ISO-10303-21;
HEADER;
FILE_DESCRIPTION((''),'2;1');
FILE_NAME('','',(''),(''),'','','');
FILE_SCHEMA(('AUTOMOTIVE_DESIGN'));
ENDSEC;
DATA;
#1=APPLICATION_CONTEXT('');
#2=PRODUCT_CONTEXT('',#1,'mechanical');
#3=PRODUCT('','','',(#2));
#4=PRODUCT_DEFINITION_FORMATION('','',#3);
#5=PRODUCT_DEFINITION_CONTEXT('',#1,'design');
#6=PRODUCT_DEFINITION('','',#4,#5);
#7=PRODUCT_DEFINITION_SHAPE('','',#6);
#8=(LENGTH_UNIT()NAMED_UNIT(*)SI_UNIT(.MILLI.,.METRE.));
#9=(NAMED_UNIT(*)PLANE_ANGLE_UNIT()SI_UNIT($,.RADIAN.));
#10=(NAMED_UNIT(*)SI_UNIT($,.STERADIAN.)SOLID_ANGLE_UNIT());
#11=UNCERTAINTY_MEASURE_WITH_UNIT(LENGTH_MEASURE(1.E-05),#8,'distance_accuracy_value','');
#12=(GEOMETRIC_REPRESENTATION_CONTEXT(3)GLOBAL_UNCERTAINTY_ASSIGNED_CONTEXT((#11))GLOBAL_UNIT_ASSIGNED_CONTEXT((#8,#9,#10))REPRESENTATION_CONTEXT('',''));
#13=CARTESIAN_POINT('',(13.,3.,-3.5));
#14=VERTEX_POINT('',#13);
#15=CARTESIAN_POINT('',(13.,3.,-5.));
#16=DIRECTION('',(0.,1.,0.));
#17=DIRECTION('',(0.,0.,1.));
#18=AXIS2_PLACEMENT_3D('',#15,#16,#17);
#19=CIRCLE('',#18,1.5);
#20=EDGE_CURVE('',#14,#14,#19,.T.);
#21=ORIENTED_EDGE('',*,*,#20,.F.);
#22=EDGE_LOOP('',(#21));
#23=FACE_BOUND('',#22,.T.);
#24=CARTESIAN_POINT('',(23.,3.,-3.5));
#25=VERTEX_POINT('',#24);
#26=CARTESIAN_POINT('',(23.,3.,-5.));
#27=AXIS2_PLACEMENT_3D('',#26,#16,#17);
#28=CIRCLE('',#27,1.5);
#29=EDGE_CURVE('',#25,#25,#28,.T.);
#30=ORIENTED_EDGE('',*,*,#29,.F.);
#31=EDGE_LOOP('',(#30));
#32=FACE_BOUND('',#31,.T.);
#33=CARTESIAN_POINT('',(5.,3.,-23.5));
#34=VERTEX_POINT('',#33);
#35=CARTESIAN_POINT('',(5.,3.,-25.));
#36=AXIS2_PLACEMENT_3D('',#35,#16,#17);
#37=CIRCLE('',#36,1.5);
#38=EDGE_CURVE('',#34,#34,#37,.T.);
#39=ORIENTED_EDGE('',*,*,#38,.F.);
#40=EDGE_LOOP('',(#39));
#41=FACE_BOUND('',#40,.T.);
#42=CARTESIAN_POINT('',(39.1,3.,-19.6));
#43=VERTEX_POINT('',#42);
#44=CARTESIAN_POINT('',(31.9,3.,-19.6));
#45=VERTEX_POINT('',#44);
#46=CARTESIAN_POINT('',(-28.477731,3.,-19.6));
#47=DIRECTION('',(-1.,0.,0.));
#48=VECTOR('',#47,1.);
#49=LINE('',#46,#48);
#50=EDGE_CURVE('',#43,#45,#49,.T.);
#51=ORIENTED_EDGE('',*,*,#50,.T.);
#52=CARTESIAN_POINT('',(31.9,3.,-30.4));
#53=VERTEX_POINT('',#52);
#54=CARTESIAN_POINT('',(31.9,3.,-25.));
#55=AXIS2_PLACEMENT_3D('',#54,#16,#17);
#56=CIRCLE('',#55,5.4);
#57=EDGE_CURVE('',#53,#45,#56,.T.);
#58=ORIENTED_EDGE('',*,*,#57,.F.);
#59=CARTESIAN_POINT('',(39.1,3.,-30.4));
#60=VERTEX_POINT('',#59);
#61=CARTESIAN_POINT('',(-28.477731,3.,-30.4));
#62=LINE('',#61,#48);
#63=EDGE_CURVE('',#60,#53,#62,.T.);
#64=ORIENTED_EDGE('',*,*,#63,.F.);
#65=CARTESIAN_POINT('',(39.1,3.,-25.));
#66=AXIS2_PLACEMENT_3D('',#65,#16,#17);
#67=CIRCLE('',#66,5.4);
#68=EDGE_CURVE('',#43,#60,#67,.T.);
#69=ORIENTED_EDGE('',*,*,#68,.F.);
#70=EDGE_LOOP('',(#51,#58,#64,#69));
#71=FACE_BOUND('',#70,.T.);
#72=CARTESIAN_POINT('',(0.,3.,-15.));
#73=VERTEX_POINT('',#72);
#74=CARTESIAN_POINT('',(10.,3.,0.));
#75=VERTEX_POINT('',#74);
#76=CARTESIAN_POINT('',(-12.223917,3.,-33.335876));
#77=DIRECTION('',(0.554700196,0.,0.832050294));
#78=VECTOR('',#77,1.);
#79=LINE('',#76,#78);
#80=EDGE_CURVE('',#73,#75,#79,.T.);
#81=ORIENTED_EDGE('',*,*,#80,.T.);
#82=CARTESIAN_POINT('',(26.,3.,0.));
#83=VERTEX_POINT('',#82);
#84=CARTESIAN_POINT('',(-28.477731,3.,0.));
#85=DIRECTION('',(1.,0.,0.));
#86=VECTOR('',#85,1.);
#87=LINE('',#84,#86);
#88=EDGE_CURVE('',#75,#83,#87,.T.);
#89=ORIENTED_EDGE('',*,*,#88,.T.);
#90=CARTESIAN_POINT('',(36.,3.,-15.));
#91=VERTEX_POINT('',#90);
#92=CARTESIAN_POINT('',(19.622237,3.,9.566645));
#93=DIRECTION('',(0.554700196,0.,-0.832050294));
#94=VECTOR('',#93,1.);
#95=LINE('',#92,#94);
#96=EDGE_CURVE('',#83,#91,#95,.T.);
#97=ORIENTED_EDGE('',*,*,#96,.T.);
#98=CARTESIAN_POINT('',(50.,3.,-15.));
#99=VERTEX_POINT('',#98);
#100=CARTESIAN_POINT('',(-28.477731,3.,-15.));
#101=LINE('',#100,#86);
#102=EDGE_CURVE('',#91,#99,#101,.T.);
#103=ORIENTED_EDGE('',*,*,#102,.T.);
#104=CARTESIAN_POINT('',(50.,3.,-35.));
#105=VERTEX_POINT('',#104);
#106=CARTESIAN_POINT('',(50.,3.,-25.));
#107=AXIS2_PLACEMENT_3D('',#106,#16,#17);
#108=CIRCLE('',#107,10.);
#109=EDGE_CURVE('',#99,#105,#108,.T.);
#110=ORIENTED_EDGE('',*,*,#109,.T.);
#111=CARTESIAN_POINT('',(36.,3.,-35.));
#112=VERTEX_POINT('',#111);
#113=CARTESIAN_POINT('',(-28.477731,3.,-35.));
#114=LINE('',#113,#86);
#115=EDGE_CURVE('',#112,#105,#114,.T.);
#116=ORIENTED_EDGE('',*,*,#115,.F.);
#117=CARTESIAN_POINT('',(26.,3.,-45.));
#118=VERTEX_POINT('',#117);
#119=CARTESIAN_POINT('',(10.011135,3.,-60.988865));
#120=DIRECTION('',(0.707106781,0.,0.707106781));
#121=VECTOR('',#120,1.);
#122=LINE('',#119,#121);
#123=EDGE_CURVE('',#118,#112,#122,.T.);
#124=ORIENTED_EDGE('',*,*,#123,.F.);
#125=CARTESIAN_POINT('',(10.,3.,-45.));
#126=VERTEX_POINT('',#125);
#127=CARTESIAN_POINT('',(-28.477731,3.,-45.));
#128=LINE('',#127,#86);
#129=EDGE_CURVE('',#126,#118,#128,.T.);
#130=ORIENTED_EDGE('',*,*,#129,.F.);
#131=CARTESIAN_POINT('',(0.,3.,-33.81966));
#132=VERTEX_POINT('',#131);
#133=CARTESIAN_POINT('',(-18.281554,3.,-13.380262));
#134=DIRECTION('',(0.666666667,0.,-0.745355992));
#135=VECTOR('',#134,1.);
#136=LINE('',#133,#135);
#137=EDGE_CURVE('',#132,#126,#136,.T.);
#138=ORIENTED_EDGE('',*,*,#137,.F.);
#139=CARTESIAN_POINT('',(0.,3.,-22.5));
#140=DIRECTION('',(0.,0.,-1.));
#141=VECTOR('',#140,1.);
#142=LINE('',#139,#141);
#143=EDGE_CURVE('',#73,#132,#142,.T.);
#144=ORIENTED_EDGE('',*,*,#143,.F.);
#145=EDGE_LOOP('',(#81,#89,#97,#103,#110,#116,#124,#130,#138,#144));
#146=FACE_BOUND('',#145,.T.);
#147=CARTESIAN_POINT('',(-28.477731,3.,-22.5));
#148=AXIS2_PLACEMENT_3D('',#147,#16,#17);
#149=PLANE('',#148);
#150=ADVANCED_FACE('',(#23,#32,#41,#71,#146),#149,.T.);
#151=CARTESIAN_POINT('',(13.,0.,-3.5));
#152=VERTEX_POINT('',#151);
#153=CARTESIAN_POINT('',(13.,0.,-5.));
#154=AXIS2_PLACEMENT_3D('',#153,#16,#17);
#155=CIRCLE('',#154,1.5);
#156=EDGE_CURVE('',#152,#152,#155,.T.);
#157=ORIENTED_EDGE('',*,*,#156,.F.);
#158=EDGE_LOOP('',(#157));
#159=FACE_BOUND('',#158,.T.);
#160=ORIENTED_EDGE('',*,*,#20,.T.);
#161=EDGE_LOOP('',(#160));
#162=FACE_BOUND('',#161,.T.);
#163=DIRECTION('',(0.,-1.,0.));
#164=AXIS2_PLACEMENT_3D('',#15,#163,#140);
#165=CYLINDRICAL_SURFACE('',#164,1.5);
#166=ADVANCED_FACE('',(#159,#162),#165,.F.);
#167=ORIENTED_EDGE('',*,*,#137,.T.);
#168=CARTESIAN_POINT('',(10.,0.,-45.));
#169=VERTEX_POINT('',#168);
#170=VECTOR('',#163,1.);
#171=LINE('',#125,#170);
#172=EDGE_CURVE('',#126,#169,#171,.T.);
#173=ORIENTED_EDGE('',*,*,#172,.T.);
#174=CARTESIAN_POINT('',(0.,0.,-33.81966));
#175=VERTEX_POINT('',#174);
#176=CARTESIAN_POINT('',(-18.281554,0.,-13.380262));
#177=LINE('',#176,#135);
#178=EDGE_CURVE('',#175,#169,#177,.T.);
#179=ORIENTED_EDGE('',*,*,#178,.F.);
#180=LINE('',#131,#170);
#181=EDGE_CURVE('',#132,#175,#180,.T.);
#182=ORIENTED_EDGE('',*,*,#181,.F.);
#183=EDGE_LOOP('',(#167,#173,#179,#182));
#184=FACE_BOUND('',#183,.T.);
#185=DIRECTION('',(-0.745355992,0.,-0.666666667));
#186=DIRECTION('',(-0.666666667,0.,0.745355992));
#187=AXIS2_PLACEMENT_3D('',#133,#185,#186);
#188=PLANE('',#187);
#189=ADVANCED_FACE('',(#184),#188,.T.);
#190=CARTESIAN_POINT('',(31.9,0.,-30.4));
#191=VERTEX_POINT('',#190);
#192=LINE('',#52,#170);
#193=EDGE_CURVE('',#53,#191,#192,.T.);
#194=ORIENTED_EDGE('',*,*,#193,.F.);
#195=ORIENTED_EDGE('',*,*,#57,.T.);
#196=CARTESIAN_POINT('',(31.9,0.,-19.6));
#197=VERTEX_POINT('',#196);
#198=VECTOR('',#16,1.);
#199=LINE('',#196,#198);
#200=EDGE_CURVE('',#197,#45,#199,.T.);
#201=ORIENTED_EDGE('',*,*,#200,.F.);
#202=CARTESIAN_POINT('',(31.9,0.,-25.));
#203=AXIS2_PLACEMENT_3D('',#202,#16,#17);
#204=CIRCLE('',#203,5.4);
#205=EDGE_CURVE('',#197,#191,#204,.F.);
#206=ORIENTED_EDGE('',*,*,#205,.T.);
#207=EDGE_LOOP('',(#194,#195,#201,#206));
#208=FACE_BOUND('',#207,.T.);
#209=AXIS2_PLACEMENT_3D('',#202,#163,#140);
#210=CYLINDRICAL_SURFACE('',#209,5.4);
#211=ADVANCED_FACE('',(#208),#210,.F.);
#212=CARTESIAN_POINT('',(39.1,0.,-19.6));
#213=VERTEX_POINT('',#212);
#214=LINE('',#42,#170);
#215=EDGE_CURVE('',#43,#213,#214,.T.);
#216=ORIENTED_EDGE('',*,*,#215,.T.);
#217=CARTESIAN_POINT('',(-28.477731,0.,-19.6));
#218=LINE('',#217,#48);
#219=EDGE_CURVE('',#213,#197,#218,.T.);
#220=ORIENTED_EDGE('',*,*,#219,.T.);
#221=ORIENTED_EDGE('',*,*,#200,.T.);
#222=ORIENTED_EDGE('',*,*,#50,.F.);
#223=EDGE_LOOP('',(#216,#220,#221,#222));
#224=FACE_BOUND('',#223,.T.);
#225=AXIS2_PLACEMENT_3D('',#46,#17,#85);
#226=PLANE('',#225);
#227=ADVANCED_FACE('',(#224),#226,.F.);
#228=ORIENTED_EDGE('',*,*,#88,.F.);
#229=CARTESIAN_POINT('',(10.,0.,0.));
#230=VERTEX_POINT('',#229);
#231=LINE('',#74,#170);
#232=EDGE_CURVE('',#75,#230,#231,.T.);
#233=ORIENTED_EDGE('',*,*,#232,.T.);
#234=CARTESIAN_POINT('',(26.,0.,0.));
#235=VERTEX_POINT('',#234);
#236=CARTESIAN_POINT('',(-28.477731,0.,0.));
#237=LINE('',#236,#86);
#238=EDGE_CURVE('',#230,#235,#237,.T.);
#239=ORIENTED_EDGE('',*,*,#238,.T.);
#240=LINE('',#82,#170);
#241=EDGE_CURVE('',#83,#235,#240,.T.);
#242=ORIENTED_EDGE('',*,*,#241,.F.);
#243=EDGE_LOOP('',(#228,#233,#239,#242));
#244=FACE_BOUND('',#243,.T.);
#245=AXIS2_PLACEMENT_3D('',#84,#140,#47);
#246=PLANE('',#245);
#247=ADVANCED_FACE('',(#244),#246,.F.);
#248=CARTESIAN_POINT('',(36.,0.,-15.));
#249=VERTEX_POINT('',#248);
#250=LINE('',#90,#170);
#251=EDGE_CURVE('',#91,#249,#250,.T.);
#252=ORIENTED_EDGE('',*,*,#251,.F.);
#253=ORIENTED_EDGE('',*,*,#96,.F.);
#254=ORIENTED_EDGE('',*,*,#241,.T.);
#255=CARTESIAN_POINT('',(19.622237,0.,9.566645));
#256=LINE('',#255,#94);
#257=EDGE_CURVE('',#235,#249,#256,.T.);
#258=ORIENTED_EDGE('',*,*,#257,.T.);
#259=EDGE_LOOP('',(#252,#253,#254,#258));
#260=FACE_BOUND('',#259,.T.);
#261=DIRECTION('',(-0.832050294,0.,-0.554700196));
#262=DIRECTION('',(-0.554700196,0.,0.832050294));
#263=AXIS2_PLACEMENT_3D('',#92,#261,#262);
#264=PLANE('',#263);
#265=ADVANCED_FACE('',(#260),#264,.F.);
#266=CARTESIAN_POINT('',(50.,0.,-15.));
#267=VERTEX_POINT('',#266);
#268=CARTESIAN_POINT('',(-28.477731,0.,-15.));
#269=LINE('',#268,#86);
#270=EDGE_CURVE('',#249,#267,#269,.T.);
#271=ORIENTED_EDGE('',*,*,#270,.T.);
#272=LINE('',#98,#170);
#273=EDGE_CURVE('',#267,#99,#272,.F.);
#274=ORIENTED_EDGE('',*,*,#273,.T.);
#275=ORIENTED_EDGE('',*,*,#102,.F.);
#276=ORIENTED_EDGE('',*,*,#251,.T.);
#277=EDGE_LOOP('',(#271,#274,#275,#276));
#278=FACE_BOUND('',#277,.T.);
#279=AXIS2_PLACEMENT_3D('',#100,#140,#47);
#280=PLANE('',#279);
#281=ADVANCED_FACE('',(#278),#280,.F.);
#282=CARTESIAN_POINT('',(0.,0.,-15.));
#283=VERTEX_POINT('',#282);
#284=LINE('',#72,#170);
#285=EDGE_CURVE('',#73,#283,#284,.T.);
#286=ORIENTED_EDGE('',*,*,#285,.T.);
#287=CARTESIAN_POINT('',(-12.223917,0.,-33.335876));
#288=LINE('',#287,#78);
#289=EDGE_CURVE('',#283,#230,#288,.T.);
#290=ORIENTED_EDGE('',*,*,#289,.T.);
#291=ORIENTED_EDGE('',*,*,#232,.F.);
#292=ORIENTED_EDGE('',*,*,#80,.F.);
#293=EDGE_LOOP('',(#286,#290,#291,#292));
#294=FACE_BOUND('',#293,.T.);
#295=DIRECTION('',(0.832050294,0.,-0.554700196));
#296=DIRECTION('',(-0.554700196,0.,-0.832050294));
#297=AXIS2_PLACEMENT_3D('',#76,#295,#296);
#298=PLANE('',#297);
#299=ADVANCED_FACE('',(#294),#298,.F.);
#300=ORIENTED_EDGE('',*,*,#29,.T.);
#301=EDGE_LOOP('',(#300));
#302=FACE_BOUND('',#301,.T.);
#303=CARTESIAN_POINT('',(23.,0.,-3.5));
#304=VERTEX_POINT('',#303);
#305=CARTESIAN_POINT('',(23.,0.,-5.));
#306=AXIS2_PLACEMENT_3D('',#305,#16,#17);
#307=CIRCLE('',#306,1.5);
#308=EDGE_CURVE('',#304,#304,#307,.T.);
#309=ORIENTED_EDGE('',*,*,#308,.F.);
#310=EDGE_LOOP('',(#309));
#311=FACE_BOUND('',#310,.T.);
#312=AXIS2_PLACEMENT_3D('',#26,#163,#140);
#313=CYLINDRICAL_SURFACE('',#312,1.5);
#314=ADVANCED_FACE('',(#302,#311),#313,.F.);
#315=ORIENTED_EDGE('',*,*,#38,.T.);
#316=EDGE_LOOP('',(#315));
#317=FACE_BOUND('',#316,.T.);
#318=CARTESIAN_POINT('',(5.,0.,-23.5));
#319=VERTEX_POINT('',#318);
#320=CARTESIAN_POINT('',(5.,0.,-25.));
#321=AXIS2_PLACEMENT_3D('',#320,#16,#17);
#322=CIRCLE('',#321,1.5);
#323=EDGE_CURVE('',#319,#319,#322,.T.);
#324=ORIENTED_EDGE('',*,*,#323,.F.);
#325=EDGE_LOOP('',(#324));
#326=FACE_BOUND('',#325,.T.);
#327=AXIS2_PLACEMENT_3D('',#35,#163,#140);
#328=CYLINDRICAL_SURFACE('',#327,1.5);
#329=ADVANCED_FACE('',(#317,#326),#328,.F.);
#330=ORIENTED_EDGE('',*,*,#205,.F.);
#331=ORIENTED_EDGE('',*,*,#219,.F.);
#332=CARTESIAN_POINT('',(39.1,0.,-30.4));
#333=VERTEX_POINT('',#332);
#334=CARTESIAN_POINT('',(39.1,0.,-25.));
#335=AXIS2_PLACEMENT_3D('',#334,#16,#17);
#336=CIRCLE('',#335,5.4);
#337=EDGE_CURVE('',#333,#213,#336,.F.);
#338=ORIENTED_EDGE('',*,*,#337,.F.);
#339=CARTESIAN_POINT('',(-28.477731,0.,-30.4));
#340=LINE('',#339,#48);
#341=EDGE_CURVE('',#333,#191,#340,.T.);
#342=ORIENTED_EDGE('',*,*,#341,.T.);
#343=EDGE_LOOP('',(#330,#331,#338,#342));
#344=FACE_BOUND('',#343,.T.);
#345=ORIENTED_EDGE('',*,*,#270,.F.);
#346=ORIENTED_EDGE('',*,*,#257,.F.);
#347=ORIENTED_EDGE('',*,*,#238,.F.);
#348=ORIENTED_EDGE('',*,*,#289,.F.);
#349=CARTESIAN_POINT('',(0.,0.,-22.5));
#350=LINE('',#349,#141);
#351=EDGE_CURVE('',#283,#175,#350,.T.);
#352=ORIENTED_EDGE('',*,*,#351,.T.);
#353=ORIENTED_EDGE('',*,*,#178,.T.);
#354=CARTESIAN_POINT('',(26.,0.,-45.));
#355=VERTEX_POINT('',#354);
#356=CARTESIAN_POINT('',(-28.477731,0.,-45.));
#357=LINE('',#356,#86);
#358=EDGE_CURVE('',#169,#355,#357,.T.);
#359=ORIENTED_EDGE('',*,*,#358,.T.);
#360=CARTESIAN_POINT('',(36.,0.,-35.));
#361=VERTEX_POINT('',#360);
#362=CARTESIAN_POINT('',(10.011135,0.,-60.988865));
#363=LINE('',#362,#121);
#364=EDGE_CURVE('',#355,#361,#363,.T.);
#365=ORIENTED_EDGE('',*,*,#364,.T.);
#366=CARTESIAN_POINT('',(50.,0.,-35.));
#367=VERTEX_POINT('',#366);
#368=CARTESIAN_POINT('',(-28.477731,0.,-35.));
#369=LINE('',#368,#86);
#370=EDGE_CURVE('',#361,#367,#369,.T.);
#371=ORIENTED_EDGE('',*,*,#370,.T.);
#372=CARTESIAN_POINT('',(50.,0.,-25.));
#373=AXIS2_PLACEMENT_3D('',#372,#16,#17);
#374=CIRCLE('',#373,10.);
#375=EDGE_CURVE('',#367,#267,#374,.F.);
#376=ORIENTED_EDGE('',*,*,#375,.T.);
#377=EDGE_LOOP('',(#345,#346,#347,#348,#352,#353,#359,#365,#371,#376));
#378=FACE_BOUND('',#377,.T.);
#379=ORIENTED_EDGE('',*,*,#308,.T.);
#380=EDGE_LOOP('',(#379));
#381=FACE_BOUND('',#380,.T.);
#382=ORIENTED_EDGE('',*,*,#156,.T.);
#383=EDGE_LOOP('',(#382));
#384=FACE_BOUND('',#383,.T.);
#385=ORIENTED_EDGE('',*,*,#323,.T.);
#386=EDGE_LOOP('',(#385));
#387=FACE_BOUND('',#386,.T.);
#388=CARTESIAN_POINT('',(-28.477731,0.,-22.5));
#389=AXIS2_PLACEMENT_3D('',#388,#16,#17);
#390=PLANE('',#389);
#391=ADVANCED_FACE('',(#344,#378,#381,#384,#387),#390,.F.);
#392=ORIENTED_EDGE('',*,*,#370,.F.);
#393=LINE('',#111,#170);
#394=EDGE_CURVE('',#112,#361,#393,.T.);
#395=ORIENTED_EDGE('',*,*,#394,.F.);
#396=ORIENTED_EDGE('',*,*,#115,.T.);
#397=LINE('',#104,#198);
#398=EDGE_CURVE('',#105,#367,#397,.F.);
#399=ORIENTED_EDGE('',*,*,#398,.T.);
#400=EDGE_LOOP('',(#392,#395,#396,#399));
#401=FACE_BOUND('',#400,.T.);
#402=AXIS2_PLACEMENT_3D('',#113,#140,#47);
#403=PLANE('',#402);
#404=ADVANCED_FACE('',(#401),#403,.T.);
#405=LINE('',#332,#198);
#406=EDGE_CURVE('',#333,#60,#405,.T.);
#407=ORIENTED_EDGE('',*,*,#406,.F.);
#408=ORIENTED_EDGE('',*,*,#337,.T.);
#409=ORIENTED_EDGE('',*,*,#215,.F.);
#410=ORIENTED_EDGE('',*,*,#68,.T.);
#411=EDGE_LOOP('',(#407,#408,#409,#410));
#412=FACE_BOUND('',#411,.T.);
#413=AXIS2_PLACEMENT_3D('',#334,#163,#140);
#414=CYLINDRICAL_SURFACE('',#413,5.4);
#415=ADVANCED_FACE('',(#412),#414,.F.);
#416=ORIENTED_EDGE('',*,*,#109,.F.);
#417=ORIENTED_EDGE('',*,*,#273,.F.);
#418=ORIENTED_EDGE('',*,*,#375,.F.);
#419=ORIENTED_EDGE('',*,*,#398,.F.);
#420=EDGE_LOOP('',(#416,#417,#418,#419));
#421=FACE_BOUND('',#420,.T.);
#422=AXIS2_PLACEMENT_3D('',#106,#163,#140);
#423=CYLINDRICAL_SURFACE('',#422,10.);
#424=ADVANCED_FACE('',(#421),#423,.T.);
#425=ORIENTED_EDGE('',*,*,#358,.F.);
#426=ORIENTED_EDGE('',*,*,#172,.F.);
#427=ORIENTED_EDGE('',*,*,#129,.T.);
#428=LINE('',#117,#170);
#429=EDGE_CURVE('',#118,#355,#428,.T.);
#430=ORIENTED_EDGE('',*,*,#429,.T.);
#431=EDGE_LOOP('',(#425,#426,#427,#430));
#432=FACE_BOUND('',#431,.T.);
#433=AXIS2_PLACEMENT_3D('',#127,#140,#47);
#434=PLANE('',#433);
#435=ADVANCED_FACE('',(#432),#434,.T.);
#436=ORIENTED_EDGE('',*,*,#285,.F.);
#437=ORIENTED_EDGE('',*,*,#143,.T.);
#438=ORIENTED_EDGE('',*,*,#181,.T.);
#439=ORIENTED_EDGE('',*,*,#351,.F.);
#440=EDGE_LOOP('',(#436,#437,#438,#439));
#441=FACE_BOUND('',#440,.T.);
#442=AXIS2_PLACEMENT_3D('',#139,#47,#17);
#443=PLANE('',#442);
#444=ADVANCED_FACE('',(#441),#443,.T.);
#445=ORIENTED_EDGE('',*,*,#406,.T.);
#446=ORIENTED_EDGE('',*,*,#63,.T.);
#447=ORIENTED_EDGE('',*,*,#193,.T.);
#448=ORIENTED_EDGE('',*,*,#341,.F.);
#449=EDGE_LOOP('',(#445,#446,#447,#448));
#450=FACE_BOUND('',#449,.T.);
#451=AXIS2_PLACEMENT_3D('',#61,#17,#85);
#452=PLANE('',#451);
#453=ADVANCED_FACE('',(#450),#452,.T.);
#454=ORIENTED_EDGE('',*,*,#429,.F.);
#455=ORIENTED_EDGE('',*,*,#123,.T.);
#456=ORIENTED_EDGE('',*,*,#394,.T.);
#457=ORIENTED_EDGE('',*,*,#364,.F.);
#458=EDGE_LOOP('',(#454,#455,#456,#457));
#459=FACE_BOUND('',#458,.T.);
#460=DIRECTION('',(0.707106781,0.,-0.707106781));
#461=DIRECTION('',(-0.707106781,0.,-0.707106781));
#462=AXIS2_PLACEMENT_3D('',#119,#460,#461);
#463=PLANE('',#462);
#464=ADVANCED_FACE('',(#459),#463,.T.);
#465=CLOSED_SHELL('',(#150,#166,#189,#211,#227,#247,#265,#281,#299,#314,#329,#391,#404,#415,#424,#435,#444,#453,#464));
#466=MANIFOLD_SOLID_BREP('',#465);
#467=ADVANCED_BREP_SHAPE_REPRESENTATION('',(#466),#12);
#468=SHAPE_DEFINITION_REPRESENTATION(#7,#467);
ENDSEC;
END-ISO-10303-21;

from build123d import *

# Parameters (mm, degrees)
SKETCH1_R           = 1.5
BOSS_EXTRUDE1_DEPTH = 3
FILLET5_RADIUS      = 10
FILLET5_LENGTH      = 3
FILLET2_R           = 5.4
FILLET4_R           = 5.4


with BuildPart() as part:
    # Sketch1 → Boss-Extrude1 (new body)
    # profile 1 of 2: a face of its own
    with BuildSketch(Plane(origin=(0, 0, 0), x_dir=(1, 0, 0), z_dir=(0, 1, 0))):
        with BuildLine():
            Line((3.5, 25), (0, 25))
            Line((0, 25), (0, 15))
            Line((0, 15), (10, 0))
            Line((10, 0), (26, 0))
            Line((26, 0), (36, 15))
            Line((36, 15), (60, 15))
            Line((60, 15), (60, 25))
            Line((60, 25), (44.5, 25))
            Line((44.5, 25), (44.5, 19.6))
            Line((44.5, 19.6), (26.5, 19.6))
            Line((26.5, 19.6), (26.5, 25))
            Line((26.5, 25), (6.5, 25))
            ThreePointArc((6.5, 25), (5, 23.5), (3.5, 25))
        make_face()
        with Locations(Location((13, 5, 0), (0, 0, 270))):
            Circle(SKETCH1_R, mode=Mode.SUBTRACT)
        with Locations(Location((23, 5, 0), (0, 0, 270))):
            Circle(SKETCH1_R, mode=Mode.SUBTRACT)
    # profile 2 of 2: a face of its own
    with BuildSketch(Plane(origin=(0, 0, 0), x_dir=(1, 0, 0), z_dir=(0, 1, 0))):
        with BuildLine():
            Line((10, 45), (0, 33.819660113))
            Line((0, 33.819660113), (0, 25))
            Line((0, 25), (3.5, 25))
            ThreePointArc((3.5, 25), (5, 26.5), (6.5, 25))
            Line((6.5, 25), (26.5, 25))
            Line((26.5, 25), (26.5, 30.4))
            Line((26.5, 30.4), (44.5, 30.4))
            Line((44.5, 30.4), (44.5, 25))
            Line((44.5, 25), (60, 25))
            Line((60, 25), (60, 35))
            Line((60, 35), (36, 35))
            Line((36, 35), (26, 45))
            Line((26, 45), (10, 45))
        make_face()
    extrude(amount=BOSS_EXTRUDE1_DEPTH)

    # Fillet5: full round fillet: the end face becomes a half cylinder, R = half its width
    fillet5_face = Plane((60, 1.5, -25), x_dir=(0, -1, 0), z_dir=(1, 0, 0))  # on the end face: x along it, z out of the body
    fillet5_slab = fillet5_face.offset(-FILLET5_RADIUS / 2) * Box(FILLET5_LENGTH, 2 * FILLET5_RADIUS, FILLET5_RADIUS, mode=Mode.PRIVATE)  # the body's end, R deep
    fillet5_round = Plane((50, 1.5, -25), x_dir=(1, 0, 0), z_dir=(0, -1, 0)) * Cylinder(FILLET5_RADIUS, FILLET5_LENGTH, mode=Mode.PRIVATE)  # its axis R under the face
    add(fillet5_slab - fillet5_round, mode=Mode.SUBTRACT)

    # Fillet2
    fillet2_edges = [part.edges().sort_by_distance(p)[0] for p in [
        (26.5, 1.5, -30.4),
        (26.5, 1.5, -19.6),
    ]]
    fillet(fillet2_edges, radius=FILLET2_R - 0.0001)  # a hair under: the kernel refuses the full size

    # Fillet4
    fillet4_edges = [part.edges().sort_by_distance(p)[0] for p in [
        (44.5, 1.5, -19.6),
        (44.5, 1.5, -30.4),
    ]]
    fillet(fillet4_edges, radius=FILLET4_R - 0.0001)  # a hair under: the kernel refuses the full size


solid = part.part
